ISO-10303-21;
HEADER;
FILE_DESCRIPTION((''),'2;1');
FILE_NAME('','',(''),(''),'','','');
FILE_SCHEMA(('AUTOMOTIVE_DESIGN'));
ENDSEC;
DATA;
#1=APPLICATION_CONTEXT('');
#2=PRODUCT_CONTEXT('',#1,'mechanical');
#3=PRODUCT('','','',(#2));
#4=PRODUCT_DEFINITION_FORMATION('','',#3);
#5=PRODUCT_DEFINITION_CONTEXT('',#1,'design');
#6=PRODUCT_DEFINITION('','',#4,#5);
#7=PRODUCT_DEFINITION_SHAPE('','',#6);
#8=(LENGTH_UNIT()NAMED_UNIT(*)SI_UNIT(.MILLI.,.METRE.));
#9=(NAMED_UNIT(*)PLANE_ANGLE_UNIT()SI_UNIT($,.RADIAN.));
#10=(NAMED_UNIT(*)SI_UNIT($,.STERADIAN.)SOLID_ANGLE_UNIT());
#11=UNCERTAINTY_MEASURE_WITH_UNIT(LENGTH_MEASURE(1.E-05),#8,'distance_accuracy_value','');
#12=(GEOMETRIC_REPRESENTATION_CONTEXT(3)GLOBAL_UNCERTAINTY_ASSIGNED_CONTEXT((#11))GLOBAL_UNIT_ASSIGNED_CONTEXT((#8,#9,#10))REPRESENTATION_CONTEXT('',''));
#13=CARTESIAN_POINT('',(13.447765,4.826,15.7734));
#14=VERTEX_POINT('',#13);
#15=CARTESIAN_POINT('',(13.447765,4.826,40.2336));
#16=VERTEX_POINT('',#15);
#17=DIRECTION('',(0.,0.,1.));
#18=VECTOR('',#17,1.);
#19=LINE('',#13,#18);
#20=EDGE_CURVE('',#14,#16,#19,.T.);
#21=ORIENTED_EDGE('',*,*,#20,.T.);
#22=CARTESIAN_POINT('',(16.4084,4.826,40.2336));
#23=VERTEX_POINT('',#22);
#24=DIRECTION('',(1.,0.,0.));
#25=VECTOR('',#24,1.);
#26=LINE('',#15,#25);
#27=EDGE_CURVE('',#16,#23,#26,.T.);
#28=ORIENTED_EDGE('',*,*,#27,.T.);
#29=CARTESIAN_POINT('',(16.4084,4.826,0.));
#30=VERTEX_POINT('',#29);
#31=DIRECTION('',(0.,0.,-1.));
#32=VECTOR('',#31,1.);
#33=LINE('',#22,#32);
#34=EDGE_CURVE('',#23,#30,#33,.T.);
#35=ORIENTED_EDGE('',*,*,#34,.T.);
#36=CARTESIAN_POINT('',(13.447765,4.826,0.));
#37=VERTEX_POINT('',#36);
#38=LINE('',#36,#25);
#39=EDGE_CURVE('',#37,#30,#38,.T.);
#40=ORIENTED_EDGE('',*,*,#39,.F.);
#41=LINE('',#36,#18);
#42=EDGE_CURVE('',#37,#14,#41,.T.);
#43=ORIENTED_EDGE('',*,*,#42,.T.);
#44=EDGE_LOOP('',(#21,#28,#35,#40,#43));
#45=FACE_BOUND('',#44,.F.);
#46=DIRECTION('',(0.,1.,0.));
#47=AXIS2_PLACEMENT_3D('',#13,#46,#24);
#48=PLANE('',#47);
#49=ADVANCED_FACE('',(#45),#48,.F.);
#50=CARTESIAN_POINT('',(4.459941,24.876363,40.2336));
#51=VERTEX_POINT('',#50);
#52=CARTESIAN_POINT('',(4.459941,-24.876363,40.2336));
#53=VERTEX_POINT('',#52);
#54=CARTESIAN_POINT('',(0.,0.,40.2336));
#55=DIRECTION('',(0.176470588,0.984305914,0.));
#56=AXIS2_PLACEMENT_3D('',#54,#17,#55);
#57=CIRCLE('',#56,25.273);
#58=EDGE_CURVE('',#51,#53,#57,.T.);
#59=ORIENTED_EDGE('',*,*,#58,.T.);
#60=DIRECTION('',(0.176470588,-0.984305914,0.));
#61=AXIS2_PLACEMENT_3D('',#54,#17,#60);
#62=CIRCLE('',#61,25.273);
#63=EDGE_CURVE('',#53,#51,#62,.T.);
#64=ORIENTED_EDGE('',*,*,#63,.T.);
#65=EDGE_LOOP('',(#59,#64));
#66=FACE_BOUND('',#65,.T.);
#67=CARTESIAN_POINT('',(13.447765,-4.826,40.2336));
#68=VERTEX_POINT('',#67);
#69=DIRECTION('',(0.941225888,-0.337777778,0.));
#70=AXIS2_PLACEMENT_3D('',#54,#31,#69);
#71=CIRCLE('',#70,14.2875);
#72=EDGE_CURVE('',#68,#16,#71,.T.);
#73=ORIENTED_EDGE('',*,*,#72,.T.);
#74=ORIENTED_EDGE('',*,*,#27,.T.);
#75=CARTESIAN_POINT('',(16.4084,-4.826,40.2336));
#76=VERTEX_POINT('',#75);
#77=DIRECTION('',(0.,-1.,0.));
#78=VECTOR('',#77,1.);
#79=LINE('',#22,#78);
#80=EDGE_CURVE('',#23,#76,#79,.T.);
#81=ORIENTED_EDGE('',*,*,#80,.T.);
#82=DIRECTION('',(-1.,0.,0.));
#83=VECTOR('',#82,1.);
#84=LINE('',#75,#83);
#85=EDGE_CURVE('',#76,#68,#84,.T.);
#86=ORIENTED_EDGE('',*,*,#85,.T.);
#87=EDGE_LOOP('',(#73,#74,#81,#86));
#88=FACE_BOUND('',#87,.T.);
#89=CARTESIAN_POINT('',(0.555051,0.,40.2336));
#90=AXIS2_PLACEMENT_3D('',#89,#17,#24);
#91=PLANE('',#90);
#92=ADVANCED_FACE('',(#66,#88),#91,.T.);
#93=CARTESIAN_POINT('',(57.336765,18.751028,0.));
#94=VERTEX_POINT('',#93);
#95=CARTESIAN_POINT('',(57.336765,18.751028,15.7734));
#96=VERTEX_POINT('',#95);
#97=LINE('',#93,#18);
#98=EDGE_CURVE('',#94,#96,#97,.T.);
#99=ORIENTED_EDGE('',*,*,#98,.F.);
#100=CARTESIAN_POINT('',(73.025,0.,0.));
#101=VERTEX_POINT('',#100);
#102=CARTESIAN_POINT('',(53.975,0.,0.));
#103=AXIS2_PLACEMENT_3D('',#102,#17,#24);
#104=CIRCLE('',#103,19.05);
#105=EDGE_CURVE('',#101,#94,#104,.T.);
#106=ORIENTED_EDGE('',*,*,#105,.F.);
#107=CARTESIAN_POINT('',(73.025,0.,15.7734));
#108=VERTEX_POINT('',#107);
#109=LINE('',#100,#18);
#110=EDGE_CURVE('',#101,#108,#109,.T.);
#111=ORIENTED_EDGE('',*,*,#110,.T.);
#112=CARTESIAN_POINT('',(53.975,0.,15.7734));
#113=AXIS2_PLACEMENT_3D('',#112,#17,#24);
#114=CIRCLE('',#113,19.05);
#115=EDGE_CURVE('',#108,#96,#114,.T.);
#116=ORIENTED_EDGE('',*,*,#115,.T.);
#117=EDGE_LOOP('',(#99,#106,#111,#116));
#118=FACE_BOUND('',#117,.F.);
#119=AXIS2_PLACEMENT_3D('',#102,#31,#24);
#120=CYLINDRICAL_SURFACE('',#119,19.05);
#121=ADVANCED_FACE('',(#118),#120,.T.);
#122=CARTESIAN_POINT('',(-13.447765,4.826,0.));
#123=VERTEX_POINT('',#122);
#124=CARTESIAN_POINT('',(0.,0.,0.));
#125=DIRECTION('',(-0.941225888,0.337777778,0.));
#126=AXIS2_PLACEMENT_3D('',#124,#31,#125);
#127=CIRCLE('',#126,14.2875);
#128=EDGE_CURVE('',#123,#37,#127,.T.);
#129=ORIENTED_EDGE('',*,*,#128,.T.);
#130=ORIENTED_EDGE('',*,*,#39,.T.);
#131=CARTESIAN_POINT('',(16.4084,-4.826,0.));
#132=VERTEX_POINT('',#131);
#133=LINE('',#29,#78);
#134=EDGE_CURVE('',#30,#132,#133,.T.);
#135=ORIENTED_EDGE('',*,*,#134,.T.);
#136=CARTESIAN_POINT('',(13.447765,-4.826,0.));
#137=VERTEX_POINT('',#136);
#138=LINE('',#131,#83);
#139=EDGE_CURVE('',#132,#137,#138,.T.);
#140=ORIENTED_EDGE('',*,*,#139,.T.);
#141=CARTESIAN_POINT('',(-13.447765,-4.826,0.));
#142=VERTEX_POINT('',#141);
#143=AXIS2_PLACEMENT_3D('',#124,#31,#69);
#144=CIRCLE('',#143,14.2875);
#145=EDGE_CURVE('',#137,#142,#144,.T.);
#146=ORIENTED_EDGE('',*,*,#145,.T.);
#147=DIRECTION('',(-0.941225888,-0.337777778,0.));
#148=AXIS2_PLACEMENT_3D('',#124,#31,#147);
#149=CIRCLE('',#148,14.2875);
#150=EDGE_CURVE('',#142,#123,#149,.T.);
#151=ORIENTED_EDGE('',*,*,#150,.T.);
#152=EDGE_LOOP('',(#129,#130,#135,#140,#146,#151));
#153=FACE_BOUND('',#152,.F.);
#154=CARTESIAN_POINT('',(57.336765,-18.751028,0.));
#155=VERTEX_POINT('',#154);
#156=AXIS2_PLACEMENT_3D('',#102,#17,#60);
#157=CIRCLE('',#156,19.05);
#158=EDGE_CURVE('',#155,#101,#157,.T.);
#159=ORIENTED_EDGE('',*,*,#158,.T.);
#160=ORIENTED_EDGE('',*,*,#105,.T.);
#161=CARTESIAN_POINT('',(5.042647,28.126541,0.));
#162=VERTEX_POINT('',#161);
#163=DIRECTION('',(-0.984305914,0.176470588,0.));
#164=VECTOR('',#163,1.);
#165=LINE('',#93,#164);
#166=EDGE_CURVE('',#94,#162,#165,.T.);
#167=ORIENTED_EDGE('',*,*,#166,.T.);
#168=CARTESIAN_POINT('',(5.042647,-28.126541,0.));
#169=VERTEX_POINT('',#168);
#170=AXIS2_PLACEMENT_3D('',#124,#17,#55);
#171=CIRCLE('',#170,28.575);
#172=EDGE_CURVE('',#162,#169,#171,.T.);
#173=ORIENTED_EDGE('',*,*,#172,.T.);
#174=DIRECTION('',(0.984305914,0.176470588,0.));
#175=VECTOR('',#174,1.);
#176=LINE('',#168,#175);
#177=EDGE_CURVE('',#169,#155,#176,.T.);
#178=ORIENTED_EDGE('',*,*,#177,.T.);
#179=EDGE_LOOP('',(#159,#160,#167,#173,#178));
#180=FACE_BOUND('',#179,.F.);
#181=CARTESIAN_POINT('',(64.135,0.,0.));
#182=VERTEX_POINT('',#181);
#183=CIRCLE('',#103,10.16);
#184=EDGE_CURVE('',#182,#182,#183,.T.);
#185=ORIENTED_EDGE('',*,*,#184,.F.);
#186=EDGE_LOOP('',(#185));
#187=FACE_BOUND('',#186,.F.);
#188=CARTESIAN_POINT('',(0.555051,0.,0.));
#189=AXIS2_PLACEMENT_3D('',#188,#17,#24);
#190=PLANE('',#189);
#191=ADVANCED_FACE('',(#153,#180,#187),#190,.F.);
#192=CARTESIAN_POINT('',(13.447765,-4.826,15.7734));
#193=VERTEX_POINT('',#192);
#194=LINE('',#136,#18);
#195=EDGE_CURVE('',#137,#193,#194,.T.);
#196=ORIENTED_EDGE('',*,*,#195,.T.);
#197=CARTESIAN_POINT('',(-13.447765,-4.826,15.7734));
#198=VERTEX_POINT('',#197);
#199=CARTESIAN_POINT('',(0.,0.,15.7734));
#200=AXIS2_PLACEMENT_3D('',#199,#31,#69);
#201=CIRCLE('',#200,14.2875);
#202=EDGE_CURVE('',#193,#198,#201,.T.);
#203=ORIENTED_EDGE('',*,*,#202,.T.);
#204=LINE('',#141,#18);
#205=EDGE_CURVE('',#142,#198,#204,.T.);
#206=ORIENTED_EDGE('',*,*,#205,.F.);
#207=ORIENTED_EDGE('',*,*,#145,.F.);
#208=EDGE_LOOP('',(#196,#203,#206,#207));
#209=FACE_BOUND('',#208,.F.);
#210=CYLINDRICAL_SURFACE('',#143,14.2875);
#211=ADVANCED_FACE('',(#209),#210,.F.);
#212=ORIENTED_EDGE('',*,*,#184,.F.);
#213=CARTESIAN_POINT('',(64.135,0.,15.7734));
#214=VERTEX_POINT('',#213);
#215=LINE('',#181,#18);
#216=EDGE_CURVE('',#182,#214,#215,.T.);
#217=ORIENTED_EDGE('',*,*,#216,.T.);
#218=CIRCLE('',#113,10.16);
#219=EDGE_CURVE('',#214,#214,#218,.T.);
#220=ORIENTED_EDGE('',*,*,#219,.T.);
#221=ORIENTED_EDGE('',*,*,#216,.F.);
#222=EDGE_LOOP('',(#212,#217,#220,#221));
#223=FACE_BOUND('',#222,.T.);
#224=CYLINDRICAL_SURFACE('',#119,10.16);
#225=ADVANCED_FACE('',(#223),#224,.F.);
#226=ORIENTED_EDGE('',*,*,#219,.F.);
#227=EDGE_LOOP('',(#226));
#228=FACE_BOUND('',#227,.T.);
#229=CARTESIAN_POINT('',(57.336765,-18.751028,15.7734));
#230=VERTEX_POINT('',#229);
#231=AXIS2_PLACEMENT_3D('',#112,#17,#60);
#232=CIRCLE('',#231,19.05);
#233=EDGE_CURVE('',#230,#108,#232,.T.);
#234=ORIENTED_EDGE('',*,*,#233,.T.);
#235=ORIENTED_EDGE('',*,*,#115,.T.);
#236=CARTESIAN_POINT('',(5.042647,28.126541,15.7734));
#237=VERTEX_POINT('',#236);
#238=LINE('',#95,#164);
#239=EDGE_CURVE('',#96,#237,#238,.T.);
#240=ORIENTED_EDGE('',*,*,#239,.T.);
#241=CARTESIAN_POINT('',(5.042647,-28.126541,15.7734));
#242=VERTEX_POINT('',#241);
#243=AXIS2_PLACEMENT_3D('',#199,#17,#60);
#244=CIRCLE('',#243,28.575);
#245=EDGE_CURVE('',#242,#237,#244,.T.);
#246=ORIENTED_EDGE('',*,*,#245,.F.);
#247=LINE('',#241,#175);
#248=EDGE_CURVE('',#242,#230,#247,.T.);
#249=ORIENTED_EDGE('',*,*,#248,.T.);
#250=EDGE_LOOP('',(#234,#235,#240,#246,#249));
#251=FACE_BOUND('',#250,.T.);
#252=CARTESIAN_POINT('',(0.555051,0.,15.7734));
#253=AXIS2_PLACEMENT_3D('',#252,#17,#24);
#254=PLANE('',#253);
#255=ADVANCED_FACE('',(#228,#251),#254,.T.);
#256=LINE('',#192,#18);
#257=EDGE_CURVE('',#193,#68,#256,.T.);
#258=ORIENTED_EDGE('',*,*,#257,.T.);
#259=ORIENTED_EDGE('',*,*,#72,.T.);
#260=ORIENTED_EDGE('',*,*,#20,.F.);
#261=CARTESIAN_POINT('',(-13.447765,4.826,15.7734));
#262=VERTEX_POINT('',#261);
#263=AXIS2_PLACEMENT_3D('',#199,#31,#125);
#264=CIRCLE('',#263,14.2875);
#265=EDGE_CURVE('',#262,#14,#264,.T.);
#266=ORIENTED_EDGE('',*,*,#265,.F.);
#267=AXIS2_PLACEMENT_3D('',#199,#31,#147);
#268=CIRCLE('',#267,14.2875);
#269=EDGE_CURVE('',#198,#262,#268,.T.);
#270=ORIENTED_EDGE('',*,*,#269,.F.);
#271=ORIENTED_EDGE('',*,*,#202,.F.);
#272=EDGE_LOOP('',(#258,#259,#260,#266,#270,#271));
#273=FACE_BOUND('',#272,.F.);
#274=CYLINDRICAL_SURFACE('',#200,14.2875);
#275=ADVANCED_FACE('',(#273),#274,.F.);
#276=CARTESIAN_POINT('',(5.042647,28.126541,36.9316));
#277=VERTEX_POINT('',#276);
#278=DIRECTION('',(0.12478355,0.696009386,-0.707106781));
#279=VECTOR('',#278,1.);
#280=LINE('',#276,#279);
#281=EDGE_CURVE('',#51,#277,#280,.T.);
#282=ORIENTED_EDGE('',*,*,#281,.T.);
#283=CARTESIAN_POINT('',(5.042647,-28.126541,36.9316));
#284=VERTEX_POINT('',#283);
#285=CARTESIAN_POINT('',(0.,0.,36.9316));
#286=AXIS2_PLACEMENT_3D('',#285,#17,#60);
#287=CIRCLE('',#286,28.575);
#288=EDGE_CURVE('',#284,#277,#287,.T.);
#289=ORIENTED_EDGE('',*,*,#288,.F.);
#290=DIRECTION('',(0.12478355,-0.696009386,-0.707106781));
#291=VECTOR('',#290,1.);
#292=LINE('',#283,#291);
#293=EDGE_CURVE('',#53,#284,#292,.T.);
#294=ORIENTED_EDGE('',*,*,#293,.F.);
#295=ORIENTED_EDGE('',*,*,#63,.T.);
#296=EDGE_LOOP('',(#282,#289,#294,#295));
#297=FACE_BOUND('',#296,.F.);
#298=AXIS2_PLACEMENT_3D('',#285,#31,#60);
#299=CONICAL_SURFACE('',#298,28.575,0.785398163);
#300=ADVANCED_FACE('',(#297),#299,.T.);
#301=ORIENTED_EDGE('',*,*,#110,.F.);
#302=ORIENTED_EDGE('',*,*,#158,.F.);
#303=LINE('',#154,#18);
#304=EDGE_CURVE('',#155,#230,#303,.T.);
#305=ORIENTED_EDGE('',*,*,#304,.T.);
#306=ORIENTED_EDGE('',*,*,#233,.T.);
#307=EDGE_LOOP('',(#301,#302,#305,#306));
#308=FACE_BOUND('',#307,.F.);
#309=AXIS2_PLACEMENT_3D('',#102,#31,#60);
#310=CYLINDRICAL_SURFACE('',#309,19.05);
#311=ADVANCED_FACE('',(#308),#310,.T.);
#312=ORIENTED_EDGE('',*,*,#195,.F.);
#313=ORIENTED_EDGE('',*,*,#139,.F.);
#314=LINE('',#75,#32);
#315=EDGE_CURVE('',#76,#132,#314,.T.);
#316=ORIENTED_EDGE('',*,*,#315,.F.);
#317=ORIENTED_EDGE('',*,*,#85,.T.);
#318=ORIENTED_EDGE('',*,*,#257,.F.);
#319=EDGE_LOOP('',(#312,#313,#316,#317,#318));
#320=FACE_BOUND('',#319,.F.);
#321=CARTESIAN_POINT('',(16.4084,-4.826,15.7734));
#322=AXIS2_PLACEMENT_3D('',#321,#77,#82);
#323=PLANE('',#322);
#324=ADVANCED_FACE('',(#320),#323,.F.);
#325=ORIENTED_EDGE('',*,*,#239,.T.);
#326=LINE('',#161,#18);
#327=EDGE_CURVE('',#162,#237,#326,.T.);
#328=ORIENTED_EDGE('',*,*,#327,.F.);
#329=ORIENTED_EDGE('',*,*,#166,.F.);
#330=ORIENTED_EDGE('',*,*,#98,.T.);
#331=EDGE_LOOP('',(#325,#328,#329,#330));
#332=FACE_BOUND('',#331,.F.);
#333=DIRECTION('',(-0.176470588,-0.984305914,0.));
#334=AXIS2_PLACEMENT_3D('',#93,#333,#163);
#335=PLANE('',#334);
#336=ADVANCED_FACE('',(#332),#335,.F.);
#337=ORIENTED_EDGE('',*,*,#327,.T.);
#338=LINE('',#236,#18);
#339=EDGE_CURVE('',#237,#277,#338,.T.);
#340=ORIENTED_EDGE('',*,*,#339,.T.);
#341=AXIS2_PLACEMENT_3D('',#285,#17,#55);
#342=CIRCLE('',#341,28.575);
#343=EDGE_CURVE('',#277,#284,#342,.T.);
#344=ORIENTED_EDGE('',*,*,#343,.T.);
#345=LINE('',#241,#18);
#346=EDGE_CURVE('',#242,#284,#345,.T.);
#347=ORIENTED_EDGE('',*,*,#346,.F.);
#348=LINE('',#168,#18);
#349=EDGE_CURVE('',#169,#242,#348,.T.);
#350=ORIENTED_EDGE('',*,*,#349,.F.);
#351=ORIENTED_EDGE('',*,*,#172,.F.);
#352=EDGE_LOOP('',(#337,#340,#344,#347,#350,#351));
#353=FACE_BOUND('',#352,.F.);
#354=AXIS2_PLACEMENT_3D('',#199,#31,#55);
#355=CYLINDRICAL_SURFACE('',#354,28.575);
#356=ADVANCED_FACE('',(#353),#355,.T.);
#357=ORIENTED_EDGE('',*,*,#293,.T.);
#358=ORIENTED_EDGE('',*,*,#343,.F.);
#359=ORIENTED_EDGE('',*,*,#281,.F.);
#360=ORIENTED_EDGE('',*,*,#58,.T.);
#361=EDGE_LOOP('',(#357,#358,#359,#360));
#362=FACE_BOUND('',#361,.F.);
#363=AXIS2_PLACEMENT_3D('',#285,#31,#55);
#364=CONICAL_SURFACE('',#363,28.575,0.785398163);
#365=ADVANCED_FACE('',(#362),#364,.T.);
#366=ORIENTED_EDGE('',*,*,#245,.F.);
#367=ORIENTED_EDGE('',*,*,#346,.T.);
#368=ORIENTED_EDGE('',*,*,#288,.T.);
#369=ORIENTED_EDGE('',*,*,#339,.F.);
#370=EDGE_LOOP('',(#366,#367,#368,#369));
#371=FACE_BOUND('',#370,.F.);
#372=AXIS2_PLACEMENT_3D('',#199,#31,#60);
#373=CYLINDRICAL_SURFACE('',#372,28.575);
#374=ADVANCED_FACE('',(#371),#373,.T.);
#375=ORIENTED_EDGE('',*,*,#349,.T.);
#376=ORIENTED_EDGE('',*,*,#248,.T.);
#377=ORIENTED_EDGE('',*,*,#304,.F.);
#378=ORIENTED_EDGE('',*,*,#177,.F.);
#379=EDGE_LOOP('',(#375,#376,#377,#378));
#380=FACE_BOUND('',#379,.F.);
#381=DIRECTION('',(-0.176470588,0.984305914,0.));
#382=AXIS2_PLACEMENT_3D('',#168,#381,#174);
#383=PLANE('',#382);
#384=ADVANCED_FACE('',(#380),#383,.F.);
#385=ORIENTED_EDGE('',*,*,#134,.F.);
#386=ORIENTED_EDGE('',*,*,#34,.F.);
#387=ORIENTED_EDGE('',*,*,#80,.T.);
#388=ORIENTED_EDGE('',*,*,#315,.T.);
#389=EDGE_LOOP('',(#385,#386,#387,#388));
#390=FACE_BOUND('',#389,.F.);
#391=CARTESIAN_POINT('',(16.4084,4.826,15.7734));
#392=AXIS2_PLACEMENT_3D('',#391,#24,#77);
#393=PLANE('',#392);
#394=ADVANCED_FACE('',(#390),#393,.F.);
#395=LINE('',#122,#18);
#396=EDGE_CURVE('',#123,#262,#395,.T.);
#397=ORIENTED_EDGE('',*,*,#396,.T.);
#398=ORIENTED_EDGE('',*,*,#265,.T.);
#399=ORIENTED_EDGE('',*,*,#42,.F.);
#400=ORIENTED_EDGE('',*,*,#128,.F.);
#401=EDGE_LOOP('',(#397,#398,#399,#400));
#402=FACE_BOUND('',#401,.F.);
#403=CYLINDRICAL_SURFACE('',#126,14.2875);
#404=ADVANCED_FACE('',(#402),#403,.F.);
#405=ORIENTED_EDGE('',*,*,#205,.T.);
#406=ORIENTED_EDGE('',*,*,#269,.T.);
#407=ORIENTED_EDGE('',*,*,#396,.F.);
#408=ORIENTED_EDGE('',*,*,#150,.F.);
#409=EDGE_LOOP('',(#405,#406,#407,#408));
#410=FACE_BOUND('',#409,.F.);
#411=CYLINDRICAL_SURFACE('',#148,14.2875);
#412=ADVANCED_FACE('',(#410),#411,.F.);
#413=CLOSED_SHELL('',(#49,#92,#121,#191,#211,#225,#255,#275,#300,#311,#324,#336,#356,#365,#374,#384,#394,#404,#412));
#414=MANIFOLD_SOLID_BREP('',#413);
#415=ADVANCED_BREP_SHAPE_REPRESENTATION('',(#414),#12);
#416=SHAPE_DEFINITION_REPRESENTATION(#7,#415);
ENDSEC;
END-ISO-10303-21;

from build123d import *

# Parameters (mm, degrees)
F0_R     = 10.16
F1_DEPTH = 15.7734
F3_DEPTH = 24.4602
F4_SIZE  = 3.302


with BuildPart() as f1:
    # F0 (on Top) → F1 (new body)
    with BuildSketch(Plane.XY):
        with BuildLine():
            ThreePointArc((5.0426470588, -28.1265414802), (21.9160245563, -18.3362616868), (28.575, 0))
            ThreePointArc((28.575, 0), (21.9160245563, 18.3362616868), (5.0426470588, 28.1265414802))
            ThreePointArc((5.0426470588, 28.1265414802), (-28.575, 0), (5.0426470588, -28.1265414802))
        make_face()
        with BuildLine():
            ThreePointArc((-13.4477648793, 4.826), (0, 14.2875), (13.4477648793, 4.826))
            Line((13.4477648793, 4.826), (16.4084, 4.826))
            Line((16.4084, 4.826), (16.4084, -4.826))
            Line((16.4084, -4.826), (13.4477648793, -4.826))
            ThreePointArc((13.4477648793, -4.826), (0, -14.2875), (-13.4477648793, -4.826))
            Line((-13.4477648793, -4.826), (-16.4084, -4.826))
            Line((-16.4084, -4.826), (-16.4084, 4.826))
            Line((-16.4084, 4.826), (-13.4477648793, 4.826))
        make_face(mode=Mode.SUBTRACT)
        with BuildLine():
            ThreePointArc((5.0426470588, 28.1265414802), (21.9160245563, 18.3362616868), (28.575, 0))
            ThreePointArc((28.575, 0), (21.9160245563, -18.3362616868), (5.0426470588, -28.1265414802))
            Line((5.0426470588, -28.1265414802), (57.3367647059, -18.7510276535))
            ThreePointArc((57.3367647059, -18.7510276535), (34.925, 0), (57.3367647059, 18.7510276535))
            Line((57.3367647059, 18.7510276535), (5.0426470588, 28.1265414802))
        make_face()
        with BuildLine():
            ThreePointArc((73.025, 0), (68.5856830375, 12.2241744579), (57.3367647059, 18.7510276535))
            ThreePointArc((57.3367647059, 18.7510276535), (34.925, 0), (57.3367647059, -18.7510276535))
            ThreePointArc((57.3367647059, -18.7510276535), (68.5856830375, -12.2241744579), (73.025, 0))
        make_face()
        with Locations((53.975, 0)):
            Circle(F0_R, mode=Mode.SUBTRACT)
        with BuildLine():
            ThreePointArc((-13.4477648793, -4.826), (-14.2875, 0), (-13.4477648793, 4.826))
            Line((-13.4477648793, 4.826), (-16.4084, 4.826))
            Line((-16.4084, 4.826), (-16.4084, -4.826))
            Line((-16.4084, -4.826), (-13.4477648793, -4.826))
        make_face()
    extrude(amount=F1_DEPTH)

    # F2 (on face) → F3 (join)
    with BuildSketch(Plane.XY.offset(15.7734)):
        with BuildLine():
            ThreePointArc((5.0426470588, -28.1265414802), (21.9160245563, -18.3362616868), (28.575, 0))
            ThreePointArc((28.575, 0), (21.9160245563, 18.3362616868), (5.0426470588, 28.1265414802))
            ThreePointArc((5.0426470588, 28.1265414802), (-28.575, 0), (5.0426470588, -28.1265414802))
        make_face()
        with BuildLine():
            ThreePointArc((13.4477648793, -4.826), (-14.2875, 0), (13.4477648793, 4.826))
            Line((13.4477648793, 4.826), (16.4084, 4.826))
            Line((16.4084, 4.826), (16.4084, -4.826))
            Line((16.4084, -4.826), (13.4477648793, -4.826))
        make_face(mode=Mode.SUBTRACT)
    extrude(amount=F3_DEPTH)

    # F4
    f4_edges = [f1.edges().sort_by_distance(p)[0] for p in [
        (-5.042647, 28.126541, 40.2336),
    ]]
    chamfer(f4_edges, length=F4_SIZE)


solid = f1.part
